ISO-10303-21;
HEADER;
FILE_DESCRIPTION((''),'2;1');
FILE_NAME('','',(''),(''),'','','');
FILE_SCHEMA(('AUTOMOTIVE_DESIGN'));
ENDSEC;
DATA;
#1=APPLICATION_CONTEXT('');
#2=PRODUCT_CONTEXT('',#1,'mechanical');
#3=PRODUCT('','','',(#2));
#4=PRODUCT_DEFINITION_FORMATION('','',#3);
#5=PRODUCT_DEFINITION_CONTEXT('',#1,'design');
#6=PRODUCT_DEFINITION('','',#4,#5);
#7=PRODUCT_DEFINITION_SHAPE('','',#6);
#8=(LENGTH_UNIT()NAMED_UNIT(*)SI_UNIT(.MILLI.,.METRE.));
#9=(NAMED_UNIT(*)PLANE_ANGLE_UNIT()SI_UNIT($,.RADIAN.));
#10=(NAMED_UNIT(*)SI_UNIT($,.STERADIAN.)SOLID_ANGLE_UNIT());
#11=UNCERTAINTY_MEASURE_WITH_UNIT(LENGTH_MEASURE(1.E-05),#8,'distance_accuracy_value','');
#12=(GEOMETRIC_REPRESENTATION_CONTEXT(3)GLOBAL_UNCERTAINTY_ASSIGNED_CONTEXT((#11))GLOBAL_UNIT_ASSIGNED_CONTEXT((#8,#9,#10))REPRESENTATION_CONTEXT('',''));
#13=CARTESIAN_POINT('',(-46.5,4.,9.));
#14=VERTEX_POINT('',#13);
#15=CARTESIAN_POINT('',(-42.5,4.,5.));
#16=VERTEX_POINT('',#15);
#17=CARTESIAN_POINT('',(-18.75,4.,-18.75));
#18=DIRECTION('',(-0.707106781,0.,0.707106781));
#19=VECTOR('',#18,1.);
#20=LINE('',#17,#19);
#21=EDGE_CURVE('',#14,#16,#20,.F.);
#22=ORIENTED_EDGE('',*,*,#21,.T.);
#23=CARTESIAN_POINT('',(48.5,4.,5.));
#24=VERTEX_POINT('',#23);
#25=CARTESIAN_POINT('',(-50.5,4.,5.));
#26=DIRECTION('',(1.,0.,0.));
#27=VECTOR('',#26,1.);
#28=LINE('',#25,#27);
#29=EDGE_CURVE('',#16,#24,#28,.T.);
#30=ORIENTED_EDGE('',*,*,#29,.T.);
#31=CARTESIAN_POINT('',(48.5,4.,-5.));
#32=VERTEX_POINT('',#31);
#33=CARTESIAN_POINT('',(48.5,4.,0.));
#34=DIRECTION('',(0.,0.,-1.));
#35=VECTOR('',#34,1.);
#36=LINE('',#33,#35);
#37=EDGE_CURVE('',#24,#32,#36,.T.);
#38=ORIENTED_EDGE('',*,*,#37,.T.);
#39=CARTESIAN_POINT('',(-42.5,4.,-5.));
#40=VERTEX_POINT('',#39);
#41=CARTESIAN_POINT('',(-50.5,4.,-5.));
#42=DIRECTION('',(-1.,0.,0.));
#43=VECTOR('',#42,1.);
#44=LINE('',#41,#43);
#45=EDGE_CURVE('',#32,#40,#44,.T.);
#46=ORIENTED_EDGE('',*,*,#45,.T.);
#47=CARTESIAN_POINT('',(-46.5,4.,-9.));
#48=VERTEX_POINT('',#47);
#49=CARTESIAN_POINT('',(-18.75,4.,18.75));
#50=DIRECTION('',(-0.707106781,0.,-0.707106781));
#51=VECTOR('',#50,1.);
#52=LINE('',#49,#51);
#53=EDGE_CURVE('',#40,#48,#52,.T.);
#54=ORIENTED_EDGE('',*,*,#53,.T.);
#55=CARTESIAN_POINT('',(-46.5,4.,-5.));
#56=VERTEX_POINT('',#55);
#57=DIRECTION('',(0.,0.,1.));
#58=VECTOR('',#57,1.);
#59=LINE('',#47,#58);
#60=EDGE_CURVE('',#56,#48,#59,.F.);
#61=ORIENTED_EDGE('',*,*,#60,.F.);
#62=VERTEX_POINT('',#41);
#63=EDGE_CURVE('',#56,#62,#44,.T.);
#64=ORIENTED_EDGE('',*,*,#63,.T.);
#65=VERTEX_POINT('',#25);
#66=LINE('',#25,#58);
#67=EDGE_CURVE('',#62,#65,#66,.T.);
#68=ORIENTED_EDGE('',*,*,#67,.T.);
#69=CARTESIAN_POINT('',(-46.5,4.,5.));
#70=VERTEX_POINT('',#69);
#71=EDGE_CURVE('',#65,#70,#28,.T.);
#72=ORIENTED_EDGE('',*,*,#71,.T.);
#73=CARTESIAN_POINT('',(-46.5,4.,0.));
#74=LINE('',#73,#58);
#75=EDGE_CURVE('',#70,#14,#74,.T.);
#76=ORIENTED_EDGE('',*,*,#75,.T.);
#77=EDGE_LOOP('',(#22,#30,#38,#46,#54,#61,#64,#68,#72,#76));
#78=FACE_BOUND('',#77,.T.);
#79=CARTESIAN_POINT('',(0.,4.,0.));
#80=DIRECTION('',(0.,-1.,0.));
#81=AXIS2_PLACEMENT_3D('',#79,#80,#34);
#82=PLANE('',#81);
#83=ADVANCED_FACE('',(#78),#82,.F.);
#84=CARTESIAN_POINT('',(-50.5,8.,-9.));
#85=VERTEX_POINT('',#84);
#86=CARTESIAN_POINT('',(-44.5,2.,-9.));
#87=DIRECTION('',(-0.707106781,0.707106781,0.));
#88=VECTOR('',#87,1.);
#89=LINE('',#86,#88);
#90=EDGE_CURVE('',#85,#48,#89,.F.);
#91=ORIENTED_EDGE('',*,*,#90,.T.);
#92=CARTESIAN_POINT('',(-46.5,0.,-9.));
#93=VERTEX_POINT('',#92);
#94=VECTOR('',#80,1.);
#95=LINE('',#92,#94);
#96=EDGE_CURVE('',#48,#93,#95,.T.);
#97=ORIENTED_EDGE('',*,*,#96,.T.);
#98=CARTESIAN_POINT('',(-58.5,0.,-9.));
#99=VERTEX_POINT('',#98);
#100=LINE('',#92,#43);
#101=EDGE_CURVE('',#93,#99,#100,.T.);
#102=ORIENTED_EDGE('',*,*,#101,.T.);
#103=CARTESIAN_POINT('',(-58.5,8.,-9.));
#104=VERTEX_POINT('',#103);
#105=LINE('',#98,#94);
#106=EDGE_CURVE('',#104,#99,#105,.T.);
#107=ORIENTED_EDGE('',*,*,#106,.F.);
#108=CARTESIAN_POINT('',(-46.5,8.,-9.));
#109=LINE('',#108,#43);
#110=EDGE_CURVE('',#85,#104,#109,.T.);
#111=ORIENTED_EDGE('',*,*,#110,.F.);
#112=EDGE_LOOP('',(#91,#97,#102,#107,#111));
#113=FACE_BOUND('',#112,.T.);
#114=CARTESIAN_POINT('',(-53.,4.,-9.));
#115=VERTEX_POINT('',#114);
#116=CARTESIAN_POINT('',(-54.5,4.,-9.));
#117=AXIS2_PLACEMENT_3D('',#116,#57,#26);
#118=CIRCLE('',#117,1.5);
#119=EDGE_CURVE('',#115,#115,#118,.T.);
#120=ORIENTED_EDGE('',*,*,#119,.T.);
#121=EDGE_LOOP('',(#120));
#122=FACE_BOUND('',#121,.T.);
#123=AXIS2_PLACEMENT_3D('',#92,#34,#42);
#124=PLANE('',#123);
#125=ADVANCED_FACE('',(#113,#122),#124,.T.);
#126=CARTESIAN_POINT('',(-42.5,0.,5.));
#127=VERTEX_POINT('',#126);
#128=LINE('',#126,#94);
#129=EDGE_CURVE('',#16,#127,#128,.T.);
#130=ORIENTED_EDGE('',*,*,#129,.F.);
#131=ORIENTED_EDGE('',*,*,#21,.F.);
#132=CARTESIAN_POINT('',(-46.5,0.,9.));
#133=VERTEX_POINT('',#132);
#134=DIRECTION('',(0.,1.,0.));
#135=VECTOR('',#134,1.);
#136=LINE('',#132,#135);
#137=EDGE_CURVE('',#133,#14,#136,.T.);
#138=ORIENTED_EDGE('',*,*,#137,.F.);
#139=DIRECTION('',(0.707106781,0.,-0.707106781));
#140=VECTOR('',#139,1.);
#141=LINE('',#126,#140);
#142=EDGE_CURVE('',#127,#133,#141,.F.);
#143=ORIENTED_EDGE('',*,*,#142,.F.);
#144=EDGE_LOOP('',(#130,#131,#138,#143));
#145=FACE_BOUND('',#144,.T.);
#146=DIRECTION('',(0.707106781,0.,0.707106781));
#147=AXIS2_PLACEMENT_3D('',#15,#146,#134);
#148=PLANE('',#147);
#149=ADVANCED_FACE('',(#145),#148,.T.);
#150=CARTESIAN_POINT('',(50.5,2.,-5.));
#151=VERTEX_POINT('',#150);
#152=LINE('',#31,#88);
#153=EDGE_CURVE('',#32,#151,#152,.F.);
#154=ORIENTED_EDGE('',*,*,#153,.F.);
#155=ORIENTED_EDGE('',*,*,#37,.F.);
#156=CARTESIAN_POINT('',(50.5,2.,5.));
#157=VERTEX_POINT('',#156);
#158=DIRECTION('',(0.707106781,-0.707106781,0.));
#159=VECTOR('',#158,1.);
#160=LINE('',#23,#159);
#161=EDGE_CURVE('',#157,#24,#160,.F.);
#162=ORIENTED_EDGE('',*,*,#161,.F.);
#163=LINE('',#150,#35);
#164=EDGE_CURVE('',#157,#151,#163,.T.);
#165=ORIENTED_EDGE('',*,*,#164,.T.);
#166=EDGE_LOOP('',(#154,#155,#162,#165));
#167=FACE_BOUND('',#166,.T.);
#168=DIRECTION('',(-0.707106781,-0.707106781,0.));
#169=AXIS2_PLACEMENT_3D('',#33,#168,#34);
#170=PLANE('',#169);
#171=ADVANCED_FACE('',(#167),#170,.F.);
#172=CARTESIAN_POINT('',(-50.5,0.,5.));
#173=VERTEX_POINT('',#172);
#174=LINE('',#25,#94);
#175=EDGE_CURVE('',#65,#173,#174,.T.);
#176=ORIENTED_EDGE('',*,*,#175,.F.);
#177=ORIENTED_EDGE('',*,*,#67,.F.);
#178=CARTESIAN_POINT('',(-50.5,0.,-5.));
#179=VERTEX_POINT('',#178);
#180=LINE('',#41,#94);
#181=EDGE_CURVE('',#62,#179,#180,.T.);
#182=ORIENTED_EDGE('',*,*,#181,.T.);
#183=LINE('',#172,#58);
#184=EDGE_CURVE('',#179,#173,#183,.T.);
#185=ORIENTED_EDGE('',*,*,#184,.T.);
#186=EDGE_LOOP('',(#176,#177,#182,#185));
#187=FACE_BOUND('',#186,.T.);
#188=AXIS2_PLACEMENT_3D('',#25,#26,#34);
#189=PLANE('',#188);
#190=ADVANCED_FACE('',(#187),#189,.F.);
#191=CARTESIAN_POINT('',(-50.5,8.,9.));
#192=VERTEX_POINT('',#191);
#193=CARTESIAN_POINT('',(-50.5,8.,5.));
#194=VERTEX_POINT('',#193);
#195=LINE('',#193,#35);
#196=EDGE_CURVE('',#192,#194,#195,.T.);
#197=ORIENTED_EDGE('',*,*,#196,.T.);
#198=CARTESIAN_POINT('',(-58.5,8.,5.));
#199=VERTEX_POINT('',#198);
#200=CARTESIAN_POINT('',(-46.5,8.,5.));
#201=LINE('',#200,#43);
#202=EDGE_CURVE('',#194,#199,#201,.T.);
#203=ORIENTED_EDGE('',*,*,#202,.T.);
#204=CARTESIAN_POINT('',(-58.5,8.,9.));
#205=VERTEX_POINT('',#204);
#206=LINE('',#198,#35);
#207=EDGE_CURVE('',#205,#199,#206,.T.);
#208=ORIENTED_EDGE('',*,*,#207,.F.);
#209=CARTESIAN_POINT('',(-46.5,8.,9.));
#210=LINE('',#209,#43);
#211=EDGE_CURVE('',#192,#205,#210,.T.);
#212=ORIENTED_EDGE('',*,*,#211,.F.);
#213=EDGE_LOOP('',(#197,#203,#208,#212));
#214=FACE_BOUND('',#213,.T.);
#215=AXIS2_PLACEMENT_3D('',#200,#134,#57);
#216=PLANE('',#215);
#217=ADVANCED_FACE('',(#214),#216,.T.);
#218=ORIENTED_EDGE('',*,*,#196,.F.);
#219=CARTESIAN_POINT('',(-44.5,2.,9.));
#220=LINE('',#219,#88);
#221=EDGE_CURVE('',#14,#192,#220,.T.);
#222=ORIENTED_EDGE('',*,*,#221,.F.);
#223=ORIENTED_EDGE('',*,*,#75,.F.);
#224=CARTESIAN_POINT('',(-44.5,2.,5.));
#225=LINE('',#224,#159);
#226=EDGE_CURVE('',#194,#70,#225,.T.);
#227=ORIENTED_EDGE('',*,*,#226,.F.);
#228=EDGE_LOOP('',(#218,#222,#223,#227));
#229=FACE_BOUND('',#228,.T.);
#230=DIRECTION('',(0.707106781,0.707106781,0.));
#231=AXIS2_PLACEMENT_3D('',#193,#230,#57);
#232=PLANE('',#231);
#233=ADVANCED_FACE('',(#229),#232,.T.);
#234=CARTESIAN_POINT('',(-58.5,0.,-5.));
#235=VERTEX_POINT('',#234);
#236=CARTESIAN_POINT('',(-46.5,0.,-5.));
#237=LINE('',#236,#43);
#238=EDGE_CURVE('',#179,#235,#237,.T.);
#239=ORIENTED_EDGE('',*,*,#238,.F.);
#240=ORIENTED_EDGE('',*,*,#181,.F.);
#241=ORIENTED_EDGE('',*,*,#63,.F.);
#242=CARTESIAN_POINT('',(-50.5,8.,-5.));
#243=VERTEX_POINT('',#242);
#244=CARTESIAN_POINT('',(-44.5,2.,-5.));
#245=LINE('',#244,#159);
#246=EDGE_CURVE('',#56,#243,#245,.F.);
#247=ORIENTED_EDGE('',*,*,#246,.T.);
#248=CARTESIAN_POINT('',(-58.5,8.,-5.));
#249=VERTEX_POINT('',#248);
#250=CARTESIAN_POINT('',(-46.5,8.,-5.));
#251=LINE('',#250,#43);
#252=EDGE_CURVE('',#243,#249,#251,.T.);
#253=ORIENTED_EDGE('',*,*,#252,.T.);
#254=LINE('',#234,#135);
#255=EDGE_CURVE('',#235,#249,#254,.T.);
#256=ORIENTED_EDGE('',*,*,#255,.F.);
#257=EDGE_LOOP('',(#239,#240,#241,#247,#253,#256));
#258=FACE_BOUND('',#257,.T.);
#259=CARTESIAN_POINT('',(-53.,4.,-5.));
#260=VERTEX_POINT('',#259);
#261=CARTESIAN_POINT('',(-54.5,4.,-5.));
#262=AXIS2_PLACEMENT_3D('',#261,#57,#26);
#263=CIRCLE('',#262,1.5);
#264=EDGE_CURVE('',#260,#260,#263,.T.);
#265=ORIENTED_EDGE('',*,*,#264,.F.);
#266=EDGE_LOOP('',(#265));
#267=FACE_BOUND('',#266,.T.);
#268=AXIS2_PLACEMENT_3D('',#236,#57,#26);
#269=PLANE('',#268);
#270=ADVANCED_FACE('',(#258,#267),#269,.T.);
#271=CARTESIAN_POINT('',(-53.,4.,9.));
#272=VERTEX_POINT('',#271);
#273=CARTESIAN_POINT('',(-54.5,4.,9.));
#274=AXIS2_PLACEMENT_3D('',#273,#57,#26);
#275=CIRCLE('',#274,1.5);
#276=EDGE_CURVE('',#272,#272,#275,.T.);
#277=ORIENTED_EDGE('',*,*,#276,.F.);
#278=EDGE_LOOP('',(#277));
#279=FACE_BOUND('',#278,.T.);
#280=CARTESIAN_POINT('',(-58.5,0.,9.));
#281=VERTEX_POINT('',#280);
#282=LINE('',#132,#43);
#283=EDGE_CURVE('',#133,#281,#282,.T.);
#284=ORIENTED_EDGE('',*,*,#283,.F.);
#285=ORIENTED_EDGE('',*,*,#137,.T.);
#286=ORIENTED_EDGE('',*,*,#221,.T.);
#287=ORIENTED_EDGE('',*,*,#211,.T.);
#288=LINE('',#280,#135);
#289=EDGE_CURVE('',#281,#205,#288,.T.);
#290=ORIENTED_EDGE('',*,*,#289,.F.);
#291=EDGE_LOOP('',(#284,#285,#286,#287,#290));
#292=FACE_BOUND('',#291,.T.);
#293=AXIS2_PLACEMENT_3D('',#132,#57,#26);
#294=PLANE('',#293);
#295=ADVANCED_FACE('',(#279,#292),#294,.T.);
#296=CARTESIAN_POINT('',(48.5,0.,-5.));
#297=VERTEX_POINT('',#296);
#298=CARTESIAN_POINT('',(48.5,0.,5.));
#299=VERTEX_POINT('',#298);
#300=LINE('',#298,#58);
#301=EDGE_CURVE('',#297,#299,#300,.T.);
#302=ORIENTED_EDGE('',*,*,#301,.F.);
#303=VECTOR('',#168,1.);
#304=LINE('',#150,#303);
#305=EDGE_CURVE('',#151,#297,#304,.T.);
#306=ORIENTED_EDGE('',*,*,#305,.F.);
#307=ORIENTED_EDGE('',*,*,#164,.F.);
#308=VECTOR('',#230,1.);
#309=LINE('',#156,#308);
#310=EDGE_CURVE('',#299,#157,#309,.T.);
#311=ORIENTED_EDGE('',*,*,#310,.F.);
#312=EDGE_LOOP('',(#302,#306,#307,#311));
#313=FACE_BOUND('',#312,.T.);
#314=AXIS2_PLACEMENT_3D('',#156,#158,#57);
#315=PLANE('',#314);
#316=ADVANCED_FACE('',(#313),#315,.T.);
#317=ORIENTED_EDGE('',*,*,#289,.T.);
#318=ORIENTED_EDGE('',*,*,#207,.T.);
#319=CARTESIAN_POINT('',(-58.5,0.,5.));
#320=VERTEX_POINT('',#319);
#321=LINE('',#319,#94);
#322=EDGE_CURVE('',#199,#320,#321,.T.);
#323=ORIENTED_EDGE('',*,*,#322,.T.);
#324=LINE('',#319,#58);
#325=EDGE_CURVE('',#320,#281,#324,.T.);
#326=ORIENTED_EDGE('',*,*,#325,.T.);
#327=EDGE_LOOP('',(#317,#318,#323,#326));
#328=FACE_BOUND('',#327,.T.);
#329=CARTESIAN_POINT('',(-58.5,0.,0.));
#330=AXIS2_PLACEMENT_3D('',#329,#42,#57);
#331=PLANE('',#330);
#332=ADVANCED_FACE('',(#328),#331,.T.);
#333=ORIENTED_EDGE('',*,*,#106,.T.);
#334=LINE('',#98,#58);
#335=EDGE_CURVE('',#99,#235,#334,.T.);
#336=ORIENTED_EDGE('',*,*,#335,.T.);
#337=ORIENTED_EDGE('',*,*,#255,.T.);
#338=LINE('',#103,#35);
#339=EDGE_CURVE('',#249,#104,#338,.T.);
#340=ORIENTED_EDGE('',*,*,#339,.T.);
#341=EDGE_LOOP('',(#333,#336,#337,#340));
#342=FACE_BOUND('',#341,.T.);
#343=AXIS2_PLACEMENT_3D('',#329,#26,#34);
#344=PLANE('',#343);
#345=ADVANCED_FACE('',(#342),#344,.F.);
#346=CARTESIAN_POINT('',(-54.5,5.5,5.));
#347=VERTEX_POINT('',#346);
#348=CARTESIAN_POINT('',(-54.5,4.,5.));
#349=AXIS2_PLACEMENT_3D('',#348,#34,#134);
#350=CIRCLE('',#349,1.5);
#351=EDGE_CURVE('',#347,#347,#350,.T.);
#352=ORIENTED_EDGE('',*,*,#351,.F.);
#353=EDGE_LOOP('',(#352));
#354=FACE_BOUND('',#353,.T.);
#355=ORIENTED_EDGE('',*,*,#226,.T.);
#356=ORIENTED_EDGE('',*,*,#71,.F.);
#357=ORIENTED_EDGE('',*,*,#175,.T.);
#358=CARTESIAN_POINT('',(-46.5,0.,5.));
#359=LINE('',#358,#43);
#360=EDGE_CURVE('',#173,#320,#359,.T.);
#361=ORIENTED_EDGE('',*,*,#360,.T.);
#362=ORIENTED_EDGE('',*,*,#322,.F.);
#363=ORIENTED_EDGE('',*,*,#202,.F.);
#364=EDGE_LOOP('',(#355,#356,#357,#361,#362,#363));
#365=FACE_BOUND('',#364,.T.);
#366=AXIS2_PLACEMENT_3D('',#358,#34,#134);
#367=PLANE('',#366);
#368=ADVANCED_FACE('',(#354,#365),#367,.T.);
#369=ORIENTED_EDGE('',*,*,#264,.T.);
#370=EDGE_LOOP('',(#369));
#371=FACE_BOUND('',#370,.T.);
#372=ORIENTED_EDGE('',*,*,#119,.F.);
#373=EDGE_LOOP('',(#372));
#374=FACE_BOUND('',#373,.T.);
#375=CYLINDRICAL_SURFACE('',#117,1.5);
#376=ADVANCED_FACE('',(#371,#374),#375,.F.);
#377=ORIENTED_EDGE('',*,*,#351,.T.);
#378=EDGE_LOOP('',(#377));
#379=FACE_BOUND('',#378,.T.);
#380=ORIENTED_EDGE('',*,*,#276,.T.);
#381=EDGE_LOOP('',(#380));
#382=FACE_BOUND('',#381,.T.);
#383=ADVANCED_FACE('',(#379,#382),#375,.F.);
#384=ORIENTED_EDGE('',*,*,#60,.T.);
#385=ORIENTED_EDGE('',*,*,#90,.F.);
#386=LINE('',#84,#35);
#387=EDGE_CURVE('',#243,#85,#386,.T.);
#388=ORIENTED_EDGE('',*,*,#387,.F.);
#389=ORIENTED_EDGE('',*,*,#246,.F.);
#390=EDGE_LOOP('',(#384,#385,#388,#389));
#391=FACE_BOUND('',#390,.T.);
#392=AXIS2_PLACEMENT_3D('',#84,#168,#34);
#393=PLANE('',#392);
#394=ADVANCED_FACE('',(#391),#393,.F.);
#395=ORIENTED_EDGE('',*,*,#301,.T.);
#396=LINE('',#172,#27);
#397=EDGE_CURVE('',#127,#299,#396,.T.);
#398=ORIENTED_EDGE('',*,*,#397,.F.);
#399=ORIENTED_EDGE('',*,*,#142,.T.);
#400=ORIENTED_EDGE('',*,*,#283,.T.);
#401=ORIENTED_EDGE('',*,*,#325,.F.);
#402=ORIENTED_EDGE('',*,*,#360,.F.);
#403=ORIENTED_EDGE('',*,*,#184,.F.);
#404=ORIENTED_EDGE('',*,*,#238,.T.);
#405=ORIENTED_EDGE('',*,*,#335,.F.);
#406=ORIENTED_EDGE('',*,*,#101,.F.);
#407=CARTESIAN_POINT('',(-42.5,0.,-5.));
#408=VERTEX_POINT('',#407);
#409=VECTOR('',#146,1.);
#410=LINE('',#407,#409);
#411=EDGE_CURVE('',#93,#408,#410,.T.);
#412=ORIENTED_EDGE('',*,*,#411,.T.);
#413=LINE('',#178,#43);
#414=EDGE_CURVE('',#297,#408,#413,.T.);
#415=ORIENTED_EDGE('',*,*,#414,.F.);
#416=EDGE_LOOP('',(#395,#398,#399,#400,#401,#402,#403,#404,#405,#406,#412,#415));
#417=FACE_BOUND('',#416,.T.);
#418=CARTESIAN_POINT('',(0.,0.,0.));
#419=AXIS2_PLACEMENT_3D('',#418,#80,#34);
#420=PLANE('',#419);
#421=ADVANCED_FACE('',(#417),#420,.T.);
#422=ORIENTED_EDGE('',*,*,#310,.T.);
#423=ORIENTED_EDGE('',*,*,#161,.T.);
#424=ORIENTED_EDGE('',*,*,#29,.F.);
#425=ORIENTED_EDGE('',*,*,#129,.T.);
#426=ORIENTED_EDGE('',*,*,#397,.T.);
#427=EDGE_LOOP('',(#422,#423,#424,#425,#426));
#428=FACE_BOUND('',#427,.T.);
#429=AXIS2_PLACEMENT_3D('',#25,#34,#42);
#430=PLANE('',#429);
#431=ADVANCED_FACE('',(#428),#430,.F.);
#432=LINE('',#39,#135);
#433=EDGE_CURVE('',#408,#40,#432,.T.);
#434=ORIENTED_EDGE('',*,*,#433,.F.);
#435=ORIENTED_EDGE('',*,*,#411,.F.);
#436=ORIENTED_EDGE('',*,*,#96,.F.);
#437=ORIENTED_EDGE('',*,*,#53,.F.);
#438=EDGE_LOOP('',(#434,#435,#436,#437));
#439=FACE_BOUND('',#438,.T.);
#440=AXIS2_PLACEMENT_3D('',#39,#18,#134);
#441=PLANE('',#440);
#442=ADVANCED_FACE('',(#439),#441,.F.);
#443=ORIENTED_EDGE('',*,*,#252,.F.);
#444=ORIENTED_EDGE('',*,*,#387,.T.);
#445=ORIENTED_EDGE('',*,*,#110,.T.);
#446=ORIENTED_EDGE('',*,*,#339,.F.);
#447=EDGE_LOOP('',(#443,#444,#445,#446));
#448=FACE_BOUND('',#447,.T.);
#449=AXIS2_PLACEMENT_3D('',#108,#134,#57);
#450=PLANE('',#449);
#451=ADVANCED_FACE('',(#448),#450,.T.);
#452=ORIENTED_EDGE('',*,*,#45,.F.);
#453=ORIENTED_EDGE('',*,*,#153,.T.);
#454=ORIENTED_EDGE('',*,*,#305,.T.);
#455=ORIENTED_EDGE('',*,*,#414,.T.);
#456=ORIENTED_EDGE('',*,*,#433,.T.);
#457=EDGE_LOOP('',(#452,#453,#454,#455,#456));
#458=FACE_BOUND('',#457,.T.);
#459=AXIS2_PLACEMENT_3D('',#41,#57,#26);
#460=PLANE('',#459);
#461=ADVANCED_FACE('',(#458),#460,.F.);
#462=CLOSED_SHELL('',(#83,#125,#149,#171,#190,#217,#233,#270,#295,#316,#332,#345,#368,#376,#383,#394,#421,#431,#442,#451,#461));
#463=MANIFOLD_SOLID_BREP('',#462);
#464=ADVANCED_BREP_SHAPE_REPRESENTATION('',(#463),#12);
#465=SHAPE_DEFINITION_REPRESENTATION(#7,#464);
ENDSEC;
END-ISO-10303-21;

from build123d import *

# Parameters (mm, degrees)
SZKIC1_W                         = 101
SZKIC1_H                         = 10
DODANIE_WYCI_GNI_CIE1_DEPTH      = 4
DODANIE_WYCI_GNI_CIE2_DEPTH      = 8
DODANIE_WYCI_GNI_CIE2_DEPTH_BACK = 4
SZKIC2_W                         = 4
SZKIC2_H                         = 8
SFAZOWANIE1_SIZE                 = 4
SFAZOWANIE2_SIZE                 = 4
WYTNIJ_WYCI_GNI_CIE1_DEPTH       = 62.72722252
WYTNIJ_WYCI_GNI_CIE1_DEPTH_BACK  = 62.72722252
SZKIC4_R                         = 1.5
SFAZOWANIE3_SIZE                 = 2


# Some blends are built 0.0001 mm under size
with BuildPart() as part:
    # Szkic1 → Dodanie-wyciągnięcie1 (new body)
    with BuildSketch(Plane(origin=(0, 0, 0), x_dir=(1, 0, 0), z_dir=(0, 1, 0))):
        Rectangle(SZKIC1_W, SZKIC1_H)
    extrude(amount=DODANIE_WYCI_GNI_CIE1_DEPTH)

    # Szkic2 → Dodanie-wyciągnięcie2 (add, two sides: drawn at the far end of the back side and taken through both)
    with BuildSketch(Plane.ZY.offset(50.5).offset(-DODANIE_WYCI_GNI_CIE2_DEPTH_BACK)):
        with Locations((-7, 4)):
            Rectangle(SZKIC2_W, SZKIC2_H)
        with Locations((7, 4)):
            Rectangle(SZKIC2_W, SZKIC2_H)
    extrude(amount=DODANIE_WYCI_GNI_CIE2_DEPTH + DODANIE_WYCI_GNI_CIE2_DEPTH_BACK)

    # Sfazowanie1
    sfazowanie1_edges = [part.edges().sort_by_distance(p)[0] for p in [
        (-46.5, 8, -7),
        (-46.5, 8, 7),
    ]]
    chamfer(sfazowanie1_edges, length=SFAZOWANIE1_SIZE)

    # Sfazowanie2
    # the kernel refuses this chamfer: 4 mm, written as the material it adds along each edge
    with BuildSketch(Plane(origin=(-46.5, 0, -5), x_dir=(0.9996219169112968, 0, 0.027495876610586296), z_dir=(0, 1, 0))) as sfazowanie2_piece_1_section:
        Polygon((SFAZOWANIE2_SIZE * 0.999621916911, SFAZOWANIE2_SIZE * 0.0274958766106), (-SFAZOWANIE2_SIZE * 0.0274958766106, SFAZOWANIE2_SIZE * 0.999621916911), (0, 0), align=None)
    sfazowanie2_piece_1 = extrude(amount=4, mode=Mode.PRIVATE)
    sfazowanie2_piece_1 = split(sfazowanie2_piece_1, bisect_by=Plane(origin=(-45.556052557, 1.526245094, -9), z_dir=(0, 0, 1)), keep=Keep.TOP, mode=Mode.PRIVATE)
    sfazowanie2_piece_1 = split(sfazowanie2_piece_1, bisect_by=Plane(origin=(-44.791148825, 2.291148825, -6.514062333), z_dir=(-0.7071067811865476, -0.7071067811865476, 0)), keep=Keep.TOP, mode=Mode.PRIVATE)
    add(sfazowanie2_piece_1)
    with BuildSketch(Plane(origin=(-46.5, 0, -5), x_dir=(0.9996219169112968, 0, 0.027495876610586296), z_dir=(0, 1, 0))) as sfazowanie2_piece_2_section:
        Polygon((SFAZOWANIE2_SIZE * 0.999621916911, SFAZOWANIE2_SIZE * 0.0274958766106), (-SFAZOWANIE2_SIZE * 0.0274958766106, SFAZOWANIE2_SIZE * 0.999621916911), (0, 0), align=None)
    sfazowanie2_piece_2 = extrude(amount=4, mode=Mode.PRIVATE)
    sfazowanie2_piece_2 = split(sfazowanie2_piece_2, bisect_by=Plane(origin=(-44.936302596, 2.436302596, -5.911229734), z_dir=(0.7071067811865476, 0.7071067811865476, 0)), keep=Keep.TOP, mode=Mode.PRIVATE)
    add(sfazowanie2_piece_2)
    with BuildSketch(Plane(origin=(-46.5, 4, 5), x_dir=(-0.027495876610585623, 0, 0.9996219169112968), z_dir=(0, -1, 0))) as sfazowanie2_piece_3_section:
        Polygon((SFAZOWANIE2_SIZE * 0.999621916911, -SFAZOWANIE2_SIZE * 0.0274958766106), (-SFAZOWANIE2_SIZE * 0.0274958766106, -SFAZOWANIE2_SIZE * 0.999621916911), (0, 0), align=None)
    sfazowanie2_piece_3 = extrude(amount=4, mode=Mode.PRIVATE)
    sfazowanie2_piece_3 = split(sfazowanie2_piece_3, bisect_by=Plane(origin=(-44.936302596, 2.436302596, 5.911229734), z_dir=(0.7071067811865476, 0.7071067811865476, 0)), keep=Keep.TOP, mode=Mode.PRIVATE)
    add(sfazowanie2_piece_3)
    with BuildSketch(Plane(origin=(-46.5, 4, 5), x_dir=(-0.027495876610585623, 0, 0.9996219169112968), z_dir=(0, -1, 0))) as sfazowanie2_piece_4_section:
        Polygon((SFAZOWANIE2_SIZE * 0.999621916911, -SFAZOWANIE2_SIZE * 0.0274958766106), (-SFAZOWANIE2_SIZE * 0.0274958766106, -SFAZOWANIE2_SIZE * 0.999621916911), (0, 0), align=None)
    sfazowanie2_piece_4 = extrude(amount=4, mode=Mode.PRIVATE)
    sfazowanie2_piece_4 = split(sfazowanie2_piece_4, bisect_by=Plane(origin=(-45.556052557, 1.526245094, 9), z_dir=(0, 0, -1)), keep=Keep.TOP, mode=Mode.PRIVATE)
    sfazowanie2_piece_4 = split(sfazowanie2_piece_4, bisect_by=Plane(origin=(-44.791148825, 2.291148825, 6.514062333), z_dir=(-0.7071067811865476, -0.7071067811865476, 0)), keep=Keep.TOP, mode=Mode.PRIVATE)
    add(sfazowanie2_piece_4)

    # Szkic4 → Wytnij-wyciągnięcie1 (cut, two sides: drawn at the far end of the back side and taken through both)
    with BuildSketch(Plane.XY.offset(9).offset(-WYTNIJ_WYCI_GNI_CIE1_DEPTH_BACK)):
        with Locations((-54.5, 4)):
            Circle(SZKIC4_R)
    extrude(amount=WYTNIJ_WYCI_GNI_CIE1_DEPTH + WYTNIJ_WYCI_GNI_CIE1_DEPTH_BACK, mode=Mode.SUBTRACT)

    # Sfazowanie3
    sfazowanie3_edges = [part.edges().sort_by_distance(p)[0] for p in [
        (50.5, 4, 0),
        (50.5, 0, 0),
    ]]
    chamfer(sfazowanie3_edges, length=SFAZOWANIE3_SIZE - 0.0001)  # a hair under: the kernel refuses the full size


solid = part.part
